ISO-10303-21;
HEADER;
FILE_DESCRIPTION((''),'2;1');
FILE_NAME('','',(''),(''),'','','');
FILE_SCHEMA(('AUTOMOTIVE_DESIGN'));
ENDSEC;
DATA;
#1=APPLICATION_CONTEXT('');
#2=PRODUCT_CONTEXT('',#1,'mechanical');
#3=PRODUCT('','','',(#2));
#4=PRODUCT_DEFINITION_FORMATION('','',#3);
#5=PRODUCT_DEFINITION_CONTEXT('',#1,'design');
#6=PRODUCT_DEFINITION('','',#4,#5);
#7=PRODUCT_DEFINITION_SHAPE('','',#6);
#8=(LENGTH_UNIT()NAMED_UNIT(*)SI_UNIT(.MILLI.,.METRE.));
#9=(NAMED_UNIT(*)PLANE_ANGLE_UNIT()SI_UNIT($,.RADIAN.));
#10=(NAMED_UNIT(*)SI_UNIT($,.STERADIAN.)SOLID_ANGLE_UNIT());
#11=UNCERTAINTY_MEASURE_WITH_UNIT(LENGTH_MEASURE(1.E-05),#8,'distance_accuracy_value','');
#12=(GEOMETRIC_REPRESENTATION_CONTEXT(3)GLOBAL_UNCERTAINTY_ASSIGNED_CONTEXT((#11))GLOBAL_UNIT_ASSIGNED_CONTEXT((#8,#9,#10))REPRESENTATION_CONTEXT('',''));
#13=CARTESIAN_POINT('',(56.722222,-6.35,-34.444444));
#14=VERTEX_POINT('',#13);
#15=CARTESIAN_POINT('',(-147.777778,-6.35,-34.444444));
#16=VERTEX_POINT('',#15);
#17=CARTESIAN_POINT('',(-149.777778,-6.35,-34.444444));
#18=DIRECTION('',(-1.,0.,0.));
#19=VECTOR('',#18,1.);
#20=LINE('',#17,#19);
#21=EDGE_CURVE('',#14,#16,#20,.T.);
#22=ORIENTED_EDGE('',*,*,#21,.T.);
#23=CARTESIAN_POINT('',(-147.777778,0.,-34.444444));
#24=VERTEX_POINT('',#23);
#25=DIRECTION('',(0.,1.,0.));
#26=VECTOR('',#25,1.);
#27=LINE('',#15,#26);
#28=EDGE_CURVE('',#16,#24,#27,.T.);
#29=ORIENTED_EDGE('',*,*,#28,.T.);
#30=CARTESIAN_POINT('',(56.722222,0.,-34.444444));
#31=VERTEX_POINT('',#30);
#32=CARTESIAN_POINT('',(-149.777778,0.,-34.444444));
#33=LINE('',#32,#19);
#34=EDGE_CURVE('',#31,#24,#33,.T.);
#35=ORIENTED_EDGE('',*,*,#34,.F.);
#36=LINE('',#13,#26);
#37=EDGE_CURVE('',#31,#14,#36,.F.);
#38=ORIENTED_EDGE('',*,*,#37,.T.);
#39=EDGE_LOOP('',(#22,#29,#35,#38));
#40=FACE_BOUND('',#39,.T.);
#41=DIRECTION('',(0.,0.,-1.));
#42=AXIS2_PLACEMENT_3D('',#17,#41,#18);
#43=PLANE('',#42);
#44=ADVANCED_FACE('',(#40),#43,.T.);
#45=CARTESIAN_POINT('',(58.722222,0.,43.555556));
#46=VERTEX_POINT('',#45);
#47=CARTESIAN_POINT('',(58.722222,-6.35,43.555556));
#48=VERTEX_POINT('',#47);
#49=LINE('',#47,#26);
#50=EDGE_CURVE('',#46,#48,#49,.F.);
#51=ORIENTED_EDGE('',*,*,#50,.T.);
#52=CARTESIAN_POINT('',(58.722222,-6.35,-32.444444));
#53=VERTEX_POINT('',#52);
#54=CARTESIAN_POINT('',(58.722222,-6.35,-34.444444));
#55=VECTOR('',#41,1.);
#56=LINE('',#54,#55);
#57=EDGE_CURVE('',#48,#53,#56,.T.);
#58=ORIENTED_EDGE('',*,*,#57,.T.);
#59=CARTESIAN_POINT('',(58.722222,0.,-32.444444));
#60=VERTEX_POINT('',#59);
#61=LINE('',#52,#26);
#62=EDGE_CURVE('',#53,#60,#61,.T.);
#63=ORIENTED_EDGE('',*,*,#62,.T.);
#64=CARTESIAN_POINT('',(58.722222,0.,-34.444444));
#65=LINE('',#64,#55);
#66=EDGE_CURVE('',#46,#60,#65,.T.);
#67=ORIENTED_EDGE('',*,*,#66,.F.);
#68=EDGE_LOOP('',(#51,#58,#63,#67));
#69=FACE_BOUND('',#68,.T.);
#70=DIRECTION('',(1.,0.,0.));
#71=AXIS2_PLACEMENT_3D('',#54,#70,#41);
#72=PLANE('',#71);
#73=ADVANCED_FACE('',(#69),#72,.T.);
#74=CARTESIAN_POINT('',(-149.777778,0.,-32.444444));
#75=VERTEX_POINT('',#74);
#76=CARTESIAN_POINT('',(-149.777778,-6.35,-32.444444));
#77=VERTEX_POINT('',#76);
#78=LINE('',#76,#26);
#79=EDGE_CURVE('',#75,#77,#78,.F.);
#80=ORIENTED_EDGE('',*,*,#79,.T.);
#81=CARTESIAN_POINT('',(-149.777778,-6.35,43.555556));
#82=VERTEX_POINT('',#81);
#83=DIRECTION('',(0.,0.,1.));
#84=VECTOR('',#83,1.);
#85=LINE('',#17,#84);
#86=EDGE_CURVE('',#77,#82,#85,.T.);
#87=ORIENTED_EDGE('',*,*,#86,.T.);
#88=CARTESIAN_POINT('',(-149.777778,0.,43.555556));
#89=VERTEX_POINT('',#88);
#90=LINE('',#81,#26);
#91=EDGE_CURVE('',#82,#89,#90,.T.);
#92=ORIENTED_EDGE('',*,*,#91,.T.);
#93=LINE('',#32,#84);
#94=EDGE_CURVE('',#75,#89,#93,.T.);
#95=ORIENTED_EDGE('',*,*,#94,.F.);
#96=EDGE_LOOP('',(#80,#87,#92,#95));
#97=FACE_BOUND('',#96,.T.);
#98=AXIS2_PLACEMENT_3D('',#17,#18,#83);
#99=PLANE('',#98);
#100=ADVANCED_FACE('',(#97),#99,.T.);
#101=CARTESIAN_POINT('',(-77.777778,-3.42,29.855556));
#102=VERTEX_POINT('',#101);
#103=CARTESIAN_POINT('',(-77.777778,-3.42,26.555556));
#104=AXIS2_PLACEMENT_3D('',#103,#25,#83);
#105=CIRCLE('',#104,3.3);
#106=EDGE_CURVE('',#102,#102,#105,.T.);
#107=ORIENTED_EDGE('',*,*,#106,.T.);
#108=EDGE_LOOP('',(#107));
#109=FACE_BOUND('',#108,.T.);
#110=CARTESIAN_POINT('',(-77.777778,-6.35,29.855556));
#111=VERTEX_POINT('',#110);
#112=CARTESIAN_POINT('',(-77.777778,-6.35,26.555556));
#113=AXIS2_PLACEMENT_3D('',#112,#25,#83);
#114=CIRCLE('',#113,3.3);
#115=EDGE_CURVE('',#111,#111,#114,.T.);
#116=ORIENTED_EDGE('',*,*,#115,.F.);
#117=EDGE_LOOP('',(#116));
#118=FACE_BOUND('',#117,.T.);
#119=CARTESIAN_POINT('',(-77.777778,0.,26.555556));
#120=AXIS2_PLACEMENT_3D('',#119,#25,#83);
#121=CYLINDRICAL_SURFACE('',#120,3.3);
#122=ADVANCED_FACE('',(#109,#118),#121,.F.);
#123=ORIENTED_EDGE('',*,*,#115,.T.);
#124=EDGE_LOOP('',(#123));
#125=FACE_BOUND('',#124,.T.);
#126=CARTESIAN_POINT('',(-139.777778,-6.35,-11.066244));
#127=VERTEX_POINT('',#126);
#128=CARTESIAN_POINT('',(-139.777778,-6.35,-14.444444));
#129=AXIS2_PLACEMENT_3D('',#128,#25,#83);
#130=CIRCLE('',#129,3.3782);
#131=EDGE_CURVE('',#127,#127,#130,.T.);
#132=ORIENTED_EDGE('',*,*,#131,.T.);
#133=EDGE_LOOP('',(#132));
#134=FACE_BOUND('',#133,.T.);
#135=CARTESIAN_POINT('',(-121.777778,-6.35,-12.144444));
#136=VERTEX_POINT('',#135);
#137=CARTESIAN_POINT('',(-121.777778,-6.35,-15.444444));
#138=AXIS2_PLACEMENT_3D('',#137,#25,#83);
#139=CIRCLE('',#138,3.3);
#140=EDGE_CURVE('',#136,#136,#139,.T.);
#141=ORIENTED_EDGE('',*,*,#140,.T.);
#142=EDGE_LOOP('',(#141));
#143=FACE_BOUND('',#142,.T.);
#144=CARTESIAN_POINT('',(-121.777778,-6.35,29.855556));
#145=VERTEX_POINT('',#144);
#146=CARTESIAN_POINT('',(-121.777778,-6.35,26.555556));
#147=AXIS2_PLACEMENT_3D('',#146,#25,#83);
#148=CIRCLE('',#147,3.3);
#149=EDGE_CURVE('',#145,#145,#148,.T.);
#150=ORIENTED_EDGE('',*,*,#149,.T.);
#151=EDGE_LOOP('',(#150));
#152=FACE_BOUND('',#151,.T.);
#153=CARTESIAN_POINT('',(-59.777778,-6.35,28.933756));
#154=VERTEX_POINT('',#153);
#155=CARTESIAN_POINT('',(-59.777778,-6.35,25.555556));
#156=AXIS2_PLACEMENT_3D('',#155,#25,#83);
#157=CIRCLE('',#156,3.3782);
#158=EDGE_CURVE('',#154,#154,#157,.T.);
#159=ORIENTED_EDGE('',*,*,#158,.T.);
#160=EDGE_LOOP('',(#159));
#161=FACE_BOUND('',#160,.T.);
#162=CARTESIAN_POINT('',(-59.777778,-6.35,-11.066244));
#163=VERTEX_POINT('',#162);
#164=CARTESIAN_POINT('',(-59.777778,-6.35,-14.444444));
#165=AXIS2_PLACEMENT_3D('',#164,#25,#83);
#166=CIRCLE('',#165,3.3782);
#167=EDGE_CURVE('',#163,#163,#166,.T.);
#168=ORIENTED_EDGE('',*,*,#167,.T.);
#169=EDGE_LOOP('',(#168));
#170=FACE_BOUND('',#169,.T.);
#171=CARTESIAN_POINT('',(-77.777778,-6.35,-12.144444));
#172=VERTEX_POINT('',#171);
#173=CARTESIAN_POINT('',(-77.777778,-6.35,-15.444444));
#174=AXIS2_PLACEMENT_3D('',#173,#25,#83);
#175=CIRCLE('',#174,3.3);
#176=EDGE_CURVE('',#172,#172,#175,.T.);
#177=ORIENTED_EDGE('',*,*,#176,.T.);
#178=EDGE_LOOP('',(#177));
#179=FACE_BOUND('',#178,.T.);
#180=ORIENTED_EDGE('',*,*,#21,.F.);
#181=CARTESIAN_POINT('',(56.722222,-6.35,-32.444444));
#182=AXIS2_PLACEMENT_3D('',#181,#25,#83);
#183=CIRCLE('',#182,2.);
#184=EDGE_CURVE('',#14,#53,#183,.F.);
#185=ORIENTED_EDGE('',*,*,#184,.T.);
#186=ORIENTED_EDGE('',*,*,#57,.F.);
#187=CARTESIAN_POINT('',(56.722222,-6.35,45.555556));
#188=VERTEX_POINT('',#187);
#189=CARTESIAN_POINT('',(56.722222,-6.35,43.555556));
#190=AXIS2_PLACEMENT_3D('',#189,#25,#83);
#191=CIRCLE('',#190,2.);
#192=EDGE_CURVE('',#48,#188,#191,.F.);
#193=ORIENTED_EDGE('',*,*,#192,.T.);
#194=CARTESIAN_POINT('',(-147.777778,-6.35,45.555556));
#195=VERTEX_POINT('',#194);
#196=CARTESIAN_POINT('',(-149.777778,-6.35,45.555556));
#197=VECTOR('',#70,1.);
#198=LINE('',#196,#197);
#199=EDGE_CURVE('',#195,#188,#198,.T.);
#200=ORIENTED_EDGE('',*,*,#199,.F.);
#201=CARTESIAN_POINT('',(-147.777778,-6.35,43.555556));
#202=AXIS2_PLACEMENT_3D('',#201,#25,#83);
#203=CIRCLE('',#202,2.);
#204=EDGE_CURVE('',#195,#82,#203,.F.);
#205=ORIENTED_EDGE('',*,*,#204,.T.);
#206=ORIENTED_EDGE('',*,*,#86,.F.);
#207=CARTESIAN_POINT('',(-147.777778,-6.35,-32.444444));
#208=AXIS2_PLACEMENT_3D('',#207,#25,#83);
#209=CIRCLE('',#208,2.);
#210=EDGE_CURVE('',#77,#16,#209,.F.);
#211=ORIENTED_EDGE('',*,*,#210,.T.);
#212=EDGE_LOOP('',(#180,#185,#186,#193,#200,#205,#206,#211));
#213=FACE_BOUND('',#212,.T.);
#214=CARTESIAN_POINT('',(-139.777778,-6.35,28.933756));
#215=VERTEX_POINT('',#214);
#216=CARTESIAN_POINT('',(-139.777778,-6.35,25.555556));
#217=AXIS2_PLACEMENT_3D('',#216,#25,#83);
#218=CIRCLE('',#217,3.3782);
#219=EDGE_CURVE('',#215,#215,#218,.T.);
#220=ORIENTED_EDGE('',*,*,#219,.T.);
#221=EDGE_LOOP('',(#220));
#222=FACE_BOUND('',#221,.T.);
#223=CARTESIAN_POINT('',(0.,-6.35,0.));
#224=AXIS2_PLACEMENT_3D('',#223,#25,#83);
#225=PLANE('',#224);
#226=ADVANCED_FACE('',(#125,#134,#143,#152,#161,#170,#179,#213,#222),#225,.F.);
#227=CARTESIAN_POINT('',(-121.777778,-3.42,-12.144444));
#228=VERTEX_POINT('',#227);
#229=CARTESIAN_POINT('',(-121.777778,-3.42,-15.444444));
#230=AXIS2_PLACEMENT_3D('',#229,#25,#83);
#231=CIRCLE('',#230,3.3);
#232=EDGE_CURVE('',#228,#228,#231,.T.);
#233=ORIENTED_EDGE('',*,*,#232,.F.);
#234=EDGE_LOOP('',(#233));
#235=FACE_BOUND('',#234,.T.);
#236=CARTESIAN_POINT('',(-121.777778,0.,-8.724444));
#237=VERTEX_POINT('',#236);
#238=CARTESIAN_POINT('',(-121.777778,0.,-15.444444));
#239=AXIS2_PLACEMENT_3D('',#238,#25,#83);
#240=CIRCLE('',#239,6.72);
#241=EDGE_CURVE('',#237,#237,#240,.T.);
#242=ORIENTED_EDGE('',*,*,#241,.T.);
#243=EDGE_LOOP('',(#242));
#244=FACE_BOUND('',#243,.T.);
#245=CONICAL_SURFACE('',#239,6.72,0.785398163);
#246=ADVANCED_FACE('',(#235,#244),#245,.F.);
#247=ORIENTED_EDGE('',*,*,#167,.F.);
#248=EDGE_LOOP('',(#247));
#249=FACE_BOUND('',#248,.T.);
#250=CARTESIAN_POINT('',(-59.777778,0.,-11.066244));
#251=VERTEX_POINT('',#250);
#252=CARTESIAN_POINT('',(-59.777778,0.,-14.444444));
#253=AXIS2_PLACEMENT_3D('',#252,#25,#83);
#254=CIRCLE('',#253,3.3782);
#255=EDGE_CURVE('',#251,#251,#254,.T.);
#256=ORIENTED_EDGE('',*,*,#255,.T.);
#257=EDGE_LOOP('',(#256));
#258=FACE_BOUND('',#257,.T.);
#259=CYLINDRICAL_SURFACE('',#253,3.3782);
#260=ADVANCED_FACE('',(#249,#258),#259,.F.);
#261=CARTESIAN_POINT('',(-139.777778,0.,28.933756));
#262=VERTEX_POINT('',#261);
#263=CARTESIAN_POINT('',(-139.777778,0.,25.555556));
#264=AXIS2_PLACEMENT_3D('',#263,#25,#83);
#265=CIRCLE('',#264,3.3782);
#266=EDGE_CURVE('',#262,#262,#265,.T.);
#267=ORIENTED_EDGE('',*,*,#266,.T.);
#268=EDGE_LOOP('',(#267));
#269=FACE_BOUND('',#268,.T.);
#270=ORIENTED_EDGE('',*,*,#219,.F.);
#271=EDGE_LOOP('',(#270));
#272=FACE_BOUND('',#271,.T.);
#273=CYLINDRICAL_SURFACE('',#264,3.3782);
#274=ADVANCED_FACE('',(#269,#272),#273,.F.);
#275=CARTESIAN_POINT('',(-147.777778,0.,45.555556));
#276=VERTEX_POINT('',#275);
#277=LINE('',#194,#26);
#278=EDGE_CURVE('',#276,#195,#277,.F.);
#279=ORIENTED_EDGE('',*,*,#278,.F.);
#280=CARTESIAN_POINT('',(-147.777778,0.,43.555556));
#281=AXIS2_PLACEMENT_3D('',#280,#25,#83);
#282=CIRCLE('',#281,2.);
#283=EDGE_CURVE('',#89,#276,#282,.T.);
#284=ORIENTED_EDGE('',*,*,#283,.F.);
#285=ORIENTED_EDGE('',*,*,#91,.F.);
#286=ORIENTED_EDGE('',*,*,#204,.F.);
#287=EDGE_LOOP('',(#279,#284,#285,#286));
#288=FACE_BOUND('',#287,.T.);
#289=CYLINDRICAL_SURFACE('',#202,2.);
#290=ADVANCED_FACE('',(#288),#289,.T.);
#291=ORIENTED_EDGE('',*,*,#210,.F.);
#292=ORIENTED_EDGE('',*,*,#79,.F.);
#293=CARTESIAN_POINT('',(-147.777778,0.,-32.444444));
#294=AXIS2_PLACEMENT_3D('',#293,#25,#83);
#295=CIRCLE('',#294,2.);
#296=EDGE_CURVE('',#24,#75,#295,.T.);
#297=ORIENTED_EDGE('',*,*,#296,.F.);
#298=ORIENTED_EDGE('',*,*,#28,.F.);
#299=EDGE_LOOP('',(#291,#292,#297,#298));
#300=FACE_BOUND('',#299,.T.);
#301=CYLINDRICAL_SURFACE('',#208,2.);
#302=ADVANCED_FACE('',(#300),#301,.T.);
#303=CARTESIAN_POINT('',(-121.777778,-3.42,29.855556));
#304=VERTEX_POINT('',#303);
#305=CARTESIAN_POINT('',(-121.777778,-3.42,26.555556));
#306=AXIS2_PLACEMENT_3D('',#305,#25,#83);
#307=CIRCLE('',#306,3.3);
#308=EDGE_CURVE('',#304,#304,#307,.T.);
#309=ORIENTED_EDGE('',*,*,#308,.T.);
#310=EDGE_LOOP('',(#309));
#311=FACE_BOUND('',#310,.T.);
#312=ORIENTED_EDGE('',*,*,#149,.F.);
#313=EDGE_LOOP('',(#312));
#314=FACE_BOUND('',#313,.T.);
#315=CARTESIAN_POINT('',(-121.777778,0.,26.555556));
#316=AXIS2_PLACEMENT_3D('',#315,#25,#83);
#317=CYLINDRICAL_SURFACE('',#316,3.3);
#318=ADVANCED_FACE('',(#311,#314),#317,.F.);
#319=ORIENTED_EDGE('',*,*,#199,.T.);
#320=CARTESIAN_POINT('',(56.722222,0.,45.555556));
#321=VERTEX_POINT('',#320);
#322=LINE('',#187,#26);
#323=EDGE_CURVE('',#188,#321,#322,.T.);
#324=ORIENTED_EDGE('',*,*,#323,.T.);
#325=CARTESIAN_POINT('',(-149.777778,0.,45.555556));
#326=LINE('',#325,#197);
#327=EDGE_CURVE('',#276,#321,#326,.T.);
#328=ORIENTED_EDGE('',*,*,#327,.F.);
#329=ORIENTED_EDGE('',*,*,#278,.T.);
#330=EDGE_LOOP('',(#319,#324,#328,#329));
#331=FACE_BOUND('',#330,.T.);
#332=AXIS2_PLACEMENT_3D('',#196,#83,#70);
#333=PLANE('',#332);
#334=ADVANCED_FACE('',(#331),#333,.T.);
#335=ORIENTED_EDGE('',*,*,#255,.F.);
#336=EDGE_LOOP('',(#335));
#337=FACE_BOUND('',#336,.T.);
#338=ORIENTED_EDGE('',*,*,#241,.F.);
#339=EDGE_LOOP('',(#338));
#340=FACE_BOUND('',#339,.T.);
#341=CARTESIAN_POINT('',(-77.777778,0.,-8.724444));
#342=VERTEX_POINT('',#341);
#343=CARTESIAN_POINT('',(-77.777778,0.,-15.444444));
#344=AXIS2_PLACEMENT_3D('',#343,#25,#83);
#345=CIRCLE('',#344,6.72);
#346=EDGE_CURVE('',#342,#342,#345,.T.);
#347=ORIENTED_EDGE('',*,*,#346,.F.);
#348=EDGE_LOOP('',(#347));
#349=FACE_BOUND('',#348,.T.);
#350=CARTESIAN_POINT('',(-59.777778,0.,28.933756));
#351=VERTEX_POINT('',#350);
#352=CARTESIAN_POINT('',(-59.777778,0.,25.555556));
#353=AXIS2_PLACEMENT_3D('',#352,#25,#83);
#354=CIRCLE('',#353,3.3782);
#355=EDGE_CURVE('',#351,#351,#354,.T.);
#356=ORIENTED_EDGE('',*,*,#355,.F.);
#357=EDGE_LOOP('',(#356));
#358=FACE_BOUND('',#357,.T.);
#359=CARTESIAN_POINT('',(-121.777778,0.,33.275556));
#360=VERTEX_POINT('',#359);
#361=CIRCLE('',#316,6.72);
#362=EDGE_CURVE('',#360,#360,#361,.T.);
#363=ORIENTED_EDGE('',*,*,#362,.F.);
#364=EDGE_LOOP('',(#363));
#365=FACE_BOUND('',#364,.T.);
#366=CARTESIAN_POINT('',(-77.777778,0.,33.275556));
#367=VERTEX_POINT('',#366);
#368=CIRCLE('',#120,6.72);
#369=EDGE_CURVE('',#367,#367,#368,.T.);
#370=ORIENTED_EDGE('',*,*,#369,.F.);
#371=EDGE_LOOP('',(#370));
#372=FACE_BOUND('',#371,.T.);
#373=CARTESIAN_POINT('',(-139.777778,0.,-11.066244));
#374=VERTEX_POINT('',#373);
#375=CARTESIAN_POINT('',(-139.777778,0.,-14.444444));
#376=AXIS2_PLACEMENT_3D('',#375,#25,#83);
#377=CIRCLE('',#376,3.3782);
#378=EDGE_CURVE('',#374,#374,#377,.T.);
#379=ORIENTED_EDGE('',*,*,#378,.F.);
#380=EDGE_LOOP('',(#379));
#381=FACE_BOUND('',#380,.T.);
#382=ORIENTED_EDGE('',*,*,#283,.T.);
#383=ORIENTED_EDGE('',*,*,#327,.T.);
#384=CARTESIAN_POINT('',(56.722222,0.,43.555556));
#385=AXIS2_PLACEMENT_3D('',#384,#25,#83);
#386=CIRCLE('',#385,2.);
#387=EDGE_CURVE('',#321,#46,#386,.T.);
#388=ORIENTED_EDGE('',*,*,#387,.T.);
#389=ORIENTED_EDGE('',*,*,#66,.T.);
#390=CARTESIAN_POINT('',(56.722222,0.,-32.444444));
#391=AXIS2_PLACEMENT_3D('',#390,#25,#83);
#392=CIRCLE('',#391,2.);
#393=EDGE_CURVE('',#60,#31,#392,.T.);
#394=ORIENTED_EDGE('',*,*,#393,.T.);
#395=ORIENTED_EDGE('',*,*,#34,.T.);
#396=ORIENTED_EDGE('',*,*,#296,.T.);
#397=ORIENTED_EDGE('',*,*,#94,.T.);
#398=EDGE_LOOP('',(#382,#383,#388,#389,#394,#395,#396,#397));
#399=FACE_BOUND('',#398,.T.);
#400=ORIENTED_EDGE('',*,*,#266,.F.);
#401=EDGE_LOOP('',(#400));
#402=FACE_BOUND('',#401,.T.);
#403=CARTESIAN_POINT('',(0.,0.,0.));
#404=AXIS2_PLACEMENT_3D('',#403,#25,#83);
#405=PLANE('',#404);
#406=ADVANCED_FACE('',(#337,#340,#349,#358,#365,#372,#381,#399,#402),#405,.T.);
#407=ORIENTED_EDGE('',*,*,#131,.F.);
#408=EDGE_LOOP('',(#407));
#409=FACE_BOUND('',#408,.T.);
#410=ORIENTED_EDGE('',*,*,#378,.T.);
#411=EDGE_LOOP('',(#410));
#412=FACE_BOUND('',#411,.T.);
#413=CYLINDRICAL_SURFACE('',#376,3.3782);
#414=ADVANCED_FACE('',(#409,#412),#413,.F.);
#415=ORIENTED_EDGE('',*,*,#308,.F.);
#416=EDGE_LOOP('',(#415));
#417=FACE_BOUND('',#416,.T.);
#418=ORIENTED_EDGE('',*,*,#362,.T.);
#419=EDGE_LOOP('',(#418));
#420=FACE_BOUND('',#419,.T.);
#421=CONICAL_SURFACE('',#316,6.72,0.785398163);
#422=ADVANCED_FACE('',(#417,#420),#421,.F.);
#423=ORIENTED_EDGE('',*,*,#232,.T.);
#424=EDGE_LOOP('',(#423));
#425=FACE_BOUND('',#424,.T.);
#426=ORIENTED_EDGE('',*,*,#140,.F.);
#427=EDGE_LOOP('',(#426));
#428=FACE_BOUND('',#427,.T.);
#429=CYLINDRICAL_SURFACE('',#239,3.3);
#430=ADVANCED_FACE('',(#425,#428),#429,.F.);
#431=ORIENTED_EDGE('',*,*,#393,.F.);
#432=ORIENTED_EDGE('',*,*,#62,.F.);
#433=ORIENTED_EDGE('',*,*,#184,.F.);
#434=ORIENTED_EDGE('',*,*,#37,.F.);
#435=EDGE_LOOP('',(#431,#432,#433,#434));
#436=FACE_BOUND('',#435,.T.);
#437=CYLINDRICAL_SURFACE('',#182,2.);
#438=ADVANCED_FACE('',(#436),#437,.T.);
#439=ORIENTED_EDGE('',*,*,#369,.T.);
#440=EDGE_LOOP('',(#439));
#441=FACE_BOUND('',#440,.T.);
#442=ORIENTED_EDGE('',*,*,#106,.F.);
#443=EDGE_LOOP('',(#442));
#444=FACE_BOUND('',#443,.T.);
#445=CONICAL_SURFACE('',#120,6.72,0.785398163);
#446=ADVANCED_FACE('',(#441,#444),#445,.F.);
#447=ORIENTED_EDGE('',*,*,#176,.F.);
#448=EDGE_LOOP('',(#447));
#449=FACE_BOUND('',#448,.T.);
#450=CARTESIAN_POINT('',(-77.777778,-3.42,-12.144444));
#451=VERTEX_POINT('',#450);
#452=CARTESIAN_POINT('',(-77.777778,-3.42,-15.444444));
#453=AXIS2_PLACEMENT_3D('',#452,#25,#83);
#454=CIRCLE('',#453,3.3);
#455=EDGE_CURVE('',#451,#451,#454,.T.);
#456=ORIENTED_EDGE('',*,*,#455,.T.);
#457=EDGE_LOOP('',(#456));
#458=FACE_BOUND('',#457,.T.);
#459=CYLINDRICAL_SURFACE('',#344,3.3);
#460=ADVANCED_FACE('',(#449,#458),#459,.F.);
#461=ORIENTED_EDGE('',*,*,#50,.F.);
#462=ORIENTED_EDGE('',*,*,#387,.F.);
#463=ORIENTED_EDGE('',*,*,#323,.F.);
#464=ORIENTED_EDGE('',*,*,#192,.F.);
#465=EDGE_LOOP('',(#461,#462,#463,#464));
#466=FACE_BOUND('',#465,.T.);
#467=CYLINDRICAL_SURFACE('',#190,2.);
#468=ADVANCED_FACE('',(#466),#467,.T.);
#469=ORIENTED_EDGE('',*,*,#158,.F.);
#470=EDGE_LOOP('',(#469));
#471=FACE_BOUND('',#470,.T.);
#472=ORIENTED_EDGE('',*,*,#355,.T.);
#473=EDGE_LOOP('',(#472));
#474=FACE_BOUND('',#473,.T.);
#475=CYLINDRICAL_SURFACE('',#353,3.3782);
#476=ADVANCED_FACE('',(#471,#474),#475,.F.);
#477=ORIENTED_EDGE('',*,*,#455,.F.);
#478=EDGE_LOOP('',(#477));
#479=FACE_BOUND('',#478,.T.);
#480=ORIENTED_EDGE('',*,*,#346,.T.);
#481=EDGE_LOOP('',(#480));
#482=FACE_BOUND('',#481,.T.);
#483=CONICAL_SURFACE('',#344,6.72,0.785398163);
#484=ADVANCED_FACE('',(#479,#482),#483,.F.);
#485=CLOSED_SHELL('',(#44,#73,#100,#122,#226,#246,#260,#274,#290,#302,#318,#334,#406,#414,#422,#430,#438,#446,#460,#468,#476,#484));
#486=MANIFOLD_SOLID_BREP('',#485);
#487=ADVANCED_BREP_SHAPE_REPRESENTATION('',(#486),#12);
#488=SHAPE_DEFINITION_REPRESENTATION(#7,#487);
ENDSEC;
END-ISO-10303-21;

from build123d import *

# Parameters (mm, degrees)
CROQUIS1_W                                   = 208.5
CROQUIS1_H                                   = 80
BRIDA_BASE1_DEPTH                            = 6.35
REDONDEO1_R                                  = 2
TALADRO_DE_MARGEN_PARA_1_41_D                = 6.7564
REFRENTADO_PARA_TORNILLO_TAP_N_CON_C_2_COUNT = 2
REFRENTADO_PARA_TORNILLO_TAP_N_CON_C_2_PITCH = 44
REFRENTADO_PARA_TORNILLO_TAP_N_CON_C_3_COUNT = 2
REFRENTADO_PARA_TORNILLO_TAP_N_CON_C_3_PITCH = 60.827625303
REFRENTADO_PARA_TORNILLO_TAP_N_CON_C_4_COUNT = 2
REFRENTADO_PARA_TORNILLO_TAP_N_CON_C_4_PITCH = 42


# Sheet-metal steps are written as plain solids
with BuildPart() as part:
    # Croquis1 → Brida base1 (new body)
    with BuildSketch(Plane(origin=(0, 0, 0), x_dir=(1, 0, 0), z_dir=(0, 1, 0))):
        with Locations((-45.527777778, -5.555555556)):
            Rectangle(CROQUIS1_W, CROQUIS1_H)
    extrude(amount=-BRIDA_BASE1_DEPTH)

    # Redondeo1
    redondeo1_edges = [part.edges().sort_by_distance(p)[0] for p in [
        (-149.777777778, -3.175, -34.444444444),
        (58.722222222, -3.175, -34.444444444),
        (58.722222222, -3.175, 45.555555556),
        (-149.777777778, -3.175, 45.555555556),
    ]]
    fillet(redondeo1_edges, radius=REDONDEO1_R)

    # Taladro de margen para 1/41 (through all)
    with Locations(Plane(origin=(0, 0, 0), x_dir=(1, 0, 0), z_dir=(0, 1, 0))):
        with Locations((-139.777777778, -25.555555556), (-59.777777778, -25.555555556), (-139.777777778, 14.444444444), (-59.777777778, 14.444444444)):
            Hole(TALADRO_DE_MARGEN_PARA_1_41_D / 2)

    # Croquis9 → Refrentado para tornillo tapón con cabeza plana de clavija de M61 (revolve, cut)
    with BuildSketch(Plane(origin=(-121.777777778, 0, -15.444444444), x_dir=(0, 0, 1), z_dir=(1, 0, 0))):
        Polygon((0, 0), (0, 6.35), (3.3, 6.35), (3.3, 3.42), (6.72, 0), align=None)
    refrentado_para_tornillo_tap_n_con_cabez = revolve(axis=Axis((-121.777777778, 6.35, -15.444444444), (0, -1, 0)), mode=Mode.SUBTRACT)

    # Refrentado para tornillo tap_n con c 2: Refrentado para tornillo tapón con cabeza plana de clavija de M61 ×2
    with Locations(*[(i * REFRENTADO_PARA_TORNILLO_TAP_N_CON_C_2_PITCH, 0, 0) for i in range(1, REFRENTADO_PARA_TORNILLO_TAP_N_CON_C_2_COUNT)]):
        add(refrentado_para_tornillo_tap_n_con_cabez, mode=Mode.SUBTRACT)

    # Refrentado para tornillo tap_n con c 3: Refrentado para tornillo tapón con cabeza plana de clavija de M61 ×2
    with Locations(*[Vector(0.723355544143572, 0, 0.6904757466825007) * (i * REFRENTADO_PARA_TORNILLO_TAP_N_CON_C_3_PITCH) for i in range(1, REFRENTADO_PARA_TORNILLO_TAP_N_CON_C_3_COUNT)]):
        add(refrentado_para_tornillo_tap_n_con_cabez, mode=Mode.SUBTRACT)

    # Refrentado para tornillo tap_n con c 4: Refrentado para tornillo tapón con cabeza plana de clavija de M61 ×2
    with Locations(*[(0, 0, i * REFRENTADO_PARA_TORNILLO_TAP_N_CON_C_4_PITCH) for i in range(1, REFRENTADO_PARA_TORNILLO_TAP_N_CON_C_4_COUNT)]):
        add(refrentado_para_tornillo_tap_n_con_cabez, mode=Mode.SUBTRACT)


solid = part.part
